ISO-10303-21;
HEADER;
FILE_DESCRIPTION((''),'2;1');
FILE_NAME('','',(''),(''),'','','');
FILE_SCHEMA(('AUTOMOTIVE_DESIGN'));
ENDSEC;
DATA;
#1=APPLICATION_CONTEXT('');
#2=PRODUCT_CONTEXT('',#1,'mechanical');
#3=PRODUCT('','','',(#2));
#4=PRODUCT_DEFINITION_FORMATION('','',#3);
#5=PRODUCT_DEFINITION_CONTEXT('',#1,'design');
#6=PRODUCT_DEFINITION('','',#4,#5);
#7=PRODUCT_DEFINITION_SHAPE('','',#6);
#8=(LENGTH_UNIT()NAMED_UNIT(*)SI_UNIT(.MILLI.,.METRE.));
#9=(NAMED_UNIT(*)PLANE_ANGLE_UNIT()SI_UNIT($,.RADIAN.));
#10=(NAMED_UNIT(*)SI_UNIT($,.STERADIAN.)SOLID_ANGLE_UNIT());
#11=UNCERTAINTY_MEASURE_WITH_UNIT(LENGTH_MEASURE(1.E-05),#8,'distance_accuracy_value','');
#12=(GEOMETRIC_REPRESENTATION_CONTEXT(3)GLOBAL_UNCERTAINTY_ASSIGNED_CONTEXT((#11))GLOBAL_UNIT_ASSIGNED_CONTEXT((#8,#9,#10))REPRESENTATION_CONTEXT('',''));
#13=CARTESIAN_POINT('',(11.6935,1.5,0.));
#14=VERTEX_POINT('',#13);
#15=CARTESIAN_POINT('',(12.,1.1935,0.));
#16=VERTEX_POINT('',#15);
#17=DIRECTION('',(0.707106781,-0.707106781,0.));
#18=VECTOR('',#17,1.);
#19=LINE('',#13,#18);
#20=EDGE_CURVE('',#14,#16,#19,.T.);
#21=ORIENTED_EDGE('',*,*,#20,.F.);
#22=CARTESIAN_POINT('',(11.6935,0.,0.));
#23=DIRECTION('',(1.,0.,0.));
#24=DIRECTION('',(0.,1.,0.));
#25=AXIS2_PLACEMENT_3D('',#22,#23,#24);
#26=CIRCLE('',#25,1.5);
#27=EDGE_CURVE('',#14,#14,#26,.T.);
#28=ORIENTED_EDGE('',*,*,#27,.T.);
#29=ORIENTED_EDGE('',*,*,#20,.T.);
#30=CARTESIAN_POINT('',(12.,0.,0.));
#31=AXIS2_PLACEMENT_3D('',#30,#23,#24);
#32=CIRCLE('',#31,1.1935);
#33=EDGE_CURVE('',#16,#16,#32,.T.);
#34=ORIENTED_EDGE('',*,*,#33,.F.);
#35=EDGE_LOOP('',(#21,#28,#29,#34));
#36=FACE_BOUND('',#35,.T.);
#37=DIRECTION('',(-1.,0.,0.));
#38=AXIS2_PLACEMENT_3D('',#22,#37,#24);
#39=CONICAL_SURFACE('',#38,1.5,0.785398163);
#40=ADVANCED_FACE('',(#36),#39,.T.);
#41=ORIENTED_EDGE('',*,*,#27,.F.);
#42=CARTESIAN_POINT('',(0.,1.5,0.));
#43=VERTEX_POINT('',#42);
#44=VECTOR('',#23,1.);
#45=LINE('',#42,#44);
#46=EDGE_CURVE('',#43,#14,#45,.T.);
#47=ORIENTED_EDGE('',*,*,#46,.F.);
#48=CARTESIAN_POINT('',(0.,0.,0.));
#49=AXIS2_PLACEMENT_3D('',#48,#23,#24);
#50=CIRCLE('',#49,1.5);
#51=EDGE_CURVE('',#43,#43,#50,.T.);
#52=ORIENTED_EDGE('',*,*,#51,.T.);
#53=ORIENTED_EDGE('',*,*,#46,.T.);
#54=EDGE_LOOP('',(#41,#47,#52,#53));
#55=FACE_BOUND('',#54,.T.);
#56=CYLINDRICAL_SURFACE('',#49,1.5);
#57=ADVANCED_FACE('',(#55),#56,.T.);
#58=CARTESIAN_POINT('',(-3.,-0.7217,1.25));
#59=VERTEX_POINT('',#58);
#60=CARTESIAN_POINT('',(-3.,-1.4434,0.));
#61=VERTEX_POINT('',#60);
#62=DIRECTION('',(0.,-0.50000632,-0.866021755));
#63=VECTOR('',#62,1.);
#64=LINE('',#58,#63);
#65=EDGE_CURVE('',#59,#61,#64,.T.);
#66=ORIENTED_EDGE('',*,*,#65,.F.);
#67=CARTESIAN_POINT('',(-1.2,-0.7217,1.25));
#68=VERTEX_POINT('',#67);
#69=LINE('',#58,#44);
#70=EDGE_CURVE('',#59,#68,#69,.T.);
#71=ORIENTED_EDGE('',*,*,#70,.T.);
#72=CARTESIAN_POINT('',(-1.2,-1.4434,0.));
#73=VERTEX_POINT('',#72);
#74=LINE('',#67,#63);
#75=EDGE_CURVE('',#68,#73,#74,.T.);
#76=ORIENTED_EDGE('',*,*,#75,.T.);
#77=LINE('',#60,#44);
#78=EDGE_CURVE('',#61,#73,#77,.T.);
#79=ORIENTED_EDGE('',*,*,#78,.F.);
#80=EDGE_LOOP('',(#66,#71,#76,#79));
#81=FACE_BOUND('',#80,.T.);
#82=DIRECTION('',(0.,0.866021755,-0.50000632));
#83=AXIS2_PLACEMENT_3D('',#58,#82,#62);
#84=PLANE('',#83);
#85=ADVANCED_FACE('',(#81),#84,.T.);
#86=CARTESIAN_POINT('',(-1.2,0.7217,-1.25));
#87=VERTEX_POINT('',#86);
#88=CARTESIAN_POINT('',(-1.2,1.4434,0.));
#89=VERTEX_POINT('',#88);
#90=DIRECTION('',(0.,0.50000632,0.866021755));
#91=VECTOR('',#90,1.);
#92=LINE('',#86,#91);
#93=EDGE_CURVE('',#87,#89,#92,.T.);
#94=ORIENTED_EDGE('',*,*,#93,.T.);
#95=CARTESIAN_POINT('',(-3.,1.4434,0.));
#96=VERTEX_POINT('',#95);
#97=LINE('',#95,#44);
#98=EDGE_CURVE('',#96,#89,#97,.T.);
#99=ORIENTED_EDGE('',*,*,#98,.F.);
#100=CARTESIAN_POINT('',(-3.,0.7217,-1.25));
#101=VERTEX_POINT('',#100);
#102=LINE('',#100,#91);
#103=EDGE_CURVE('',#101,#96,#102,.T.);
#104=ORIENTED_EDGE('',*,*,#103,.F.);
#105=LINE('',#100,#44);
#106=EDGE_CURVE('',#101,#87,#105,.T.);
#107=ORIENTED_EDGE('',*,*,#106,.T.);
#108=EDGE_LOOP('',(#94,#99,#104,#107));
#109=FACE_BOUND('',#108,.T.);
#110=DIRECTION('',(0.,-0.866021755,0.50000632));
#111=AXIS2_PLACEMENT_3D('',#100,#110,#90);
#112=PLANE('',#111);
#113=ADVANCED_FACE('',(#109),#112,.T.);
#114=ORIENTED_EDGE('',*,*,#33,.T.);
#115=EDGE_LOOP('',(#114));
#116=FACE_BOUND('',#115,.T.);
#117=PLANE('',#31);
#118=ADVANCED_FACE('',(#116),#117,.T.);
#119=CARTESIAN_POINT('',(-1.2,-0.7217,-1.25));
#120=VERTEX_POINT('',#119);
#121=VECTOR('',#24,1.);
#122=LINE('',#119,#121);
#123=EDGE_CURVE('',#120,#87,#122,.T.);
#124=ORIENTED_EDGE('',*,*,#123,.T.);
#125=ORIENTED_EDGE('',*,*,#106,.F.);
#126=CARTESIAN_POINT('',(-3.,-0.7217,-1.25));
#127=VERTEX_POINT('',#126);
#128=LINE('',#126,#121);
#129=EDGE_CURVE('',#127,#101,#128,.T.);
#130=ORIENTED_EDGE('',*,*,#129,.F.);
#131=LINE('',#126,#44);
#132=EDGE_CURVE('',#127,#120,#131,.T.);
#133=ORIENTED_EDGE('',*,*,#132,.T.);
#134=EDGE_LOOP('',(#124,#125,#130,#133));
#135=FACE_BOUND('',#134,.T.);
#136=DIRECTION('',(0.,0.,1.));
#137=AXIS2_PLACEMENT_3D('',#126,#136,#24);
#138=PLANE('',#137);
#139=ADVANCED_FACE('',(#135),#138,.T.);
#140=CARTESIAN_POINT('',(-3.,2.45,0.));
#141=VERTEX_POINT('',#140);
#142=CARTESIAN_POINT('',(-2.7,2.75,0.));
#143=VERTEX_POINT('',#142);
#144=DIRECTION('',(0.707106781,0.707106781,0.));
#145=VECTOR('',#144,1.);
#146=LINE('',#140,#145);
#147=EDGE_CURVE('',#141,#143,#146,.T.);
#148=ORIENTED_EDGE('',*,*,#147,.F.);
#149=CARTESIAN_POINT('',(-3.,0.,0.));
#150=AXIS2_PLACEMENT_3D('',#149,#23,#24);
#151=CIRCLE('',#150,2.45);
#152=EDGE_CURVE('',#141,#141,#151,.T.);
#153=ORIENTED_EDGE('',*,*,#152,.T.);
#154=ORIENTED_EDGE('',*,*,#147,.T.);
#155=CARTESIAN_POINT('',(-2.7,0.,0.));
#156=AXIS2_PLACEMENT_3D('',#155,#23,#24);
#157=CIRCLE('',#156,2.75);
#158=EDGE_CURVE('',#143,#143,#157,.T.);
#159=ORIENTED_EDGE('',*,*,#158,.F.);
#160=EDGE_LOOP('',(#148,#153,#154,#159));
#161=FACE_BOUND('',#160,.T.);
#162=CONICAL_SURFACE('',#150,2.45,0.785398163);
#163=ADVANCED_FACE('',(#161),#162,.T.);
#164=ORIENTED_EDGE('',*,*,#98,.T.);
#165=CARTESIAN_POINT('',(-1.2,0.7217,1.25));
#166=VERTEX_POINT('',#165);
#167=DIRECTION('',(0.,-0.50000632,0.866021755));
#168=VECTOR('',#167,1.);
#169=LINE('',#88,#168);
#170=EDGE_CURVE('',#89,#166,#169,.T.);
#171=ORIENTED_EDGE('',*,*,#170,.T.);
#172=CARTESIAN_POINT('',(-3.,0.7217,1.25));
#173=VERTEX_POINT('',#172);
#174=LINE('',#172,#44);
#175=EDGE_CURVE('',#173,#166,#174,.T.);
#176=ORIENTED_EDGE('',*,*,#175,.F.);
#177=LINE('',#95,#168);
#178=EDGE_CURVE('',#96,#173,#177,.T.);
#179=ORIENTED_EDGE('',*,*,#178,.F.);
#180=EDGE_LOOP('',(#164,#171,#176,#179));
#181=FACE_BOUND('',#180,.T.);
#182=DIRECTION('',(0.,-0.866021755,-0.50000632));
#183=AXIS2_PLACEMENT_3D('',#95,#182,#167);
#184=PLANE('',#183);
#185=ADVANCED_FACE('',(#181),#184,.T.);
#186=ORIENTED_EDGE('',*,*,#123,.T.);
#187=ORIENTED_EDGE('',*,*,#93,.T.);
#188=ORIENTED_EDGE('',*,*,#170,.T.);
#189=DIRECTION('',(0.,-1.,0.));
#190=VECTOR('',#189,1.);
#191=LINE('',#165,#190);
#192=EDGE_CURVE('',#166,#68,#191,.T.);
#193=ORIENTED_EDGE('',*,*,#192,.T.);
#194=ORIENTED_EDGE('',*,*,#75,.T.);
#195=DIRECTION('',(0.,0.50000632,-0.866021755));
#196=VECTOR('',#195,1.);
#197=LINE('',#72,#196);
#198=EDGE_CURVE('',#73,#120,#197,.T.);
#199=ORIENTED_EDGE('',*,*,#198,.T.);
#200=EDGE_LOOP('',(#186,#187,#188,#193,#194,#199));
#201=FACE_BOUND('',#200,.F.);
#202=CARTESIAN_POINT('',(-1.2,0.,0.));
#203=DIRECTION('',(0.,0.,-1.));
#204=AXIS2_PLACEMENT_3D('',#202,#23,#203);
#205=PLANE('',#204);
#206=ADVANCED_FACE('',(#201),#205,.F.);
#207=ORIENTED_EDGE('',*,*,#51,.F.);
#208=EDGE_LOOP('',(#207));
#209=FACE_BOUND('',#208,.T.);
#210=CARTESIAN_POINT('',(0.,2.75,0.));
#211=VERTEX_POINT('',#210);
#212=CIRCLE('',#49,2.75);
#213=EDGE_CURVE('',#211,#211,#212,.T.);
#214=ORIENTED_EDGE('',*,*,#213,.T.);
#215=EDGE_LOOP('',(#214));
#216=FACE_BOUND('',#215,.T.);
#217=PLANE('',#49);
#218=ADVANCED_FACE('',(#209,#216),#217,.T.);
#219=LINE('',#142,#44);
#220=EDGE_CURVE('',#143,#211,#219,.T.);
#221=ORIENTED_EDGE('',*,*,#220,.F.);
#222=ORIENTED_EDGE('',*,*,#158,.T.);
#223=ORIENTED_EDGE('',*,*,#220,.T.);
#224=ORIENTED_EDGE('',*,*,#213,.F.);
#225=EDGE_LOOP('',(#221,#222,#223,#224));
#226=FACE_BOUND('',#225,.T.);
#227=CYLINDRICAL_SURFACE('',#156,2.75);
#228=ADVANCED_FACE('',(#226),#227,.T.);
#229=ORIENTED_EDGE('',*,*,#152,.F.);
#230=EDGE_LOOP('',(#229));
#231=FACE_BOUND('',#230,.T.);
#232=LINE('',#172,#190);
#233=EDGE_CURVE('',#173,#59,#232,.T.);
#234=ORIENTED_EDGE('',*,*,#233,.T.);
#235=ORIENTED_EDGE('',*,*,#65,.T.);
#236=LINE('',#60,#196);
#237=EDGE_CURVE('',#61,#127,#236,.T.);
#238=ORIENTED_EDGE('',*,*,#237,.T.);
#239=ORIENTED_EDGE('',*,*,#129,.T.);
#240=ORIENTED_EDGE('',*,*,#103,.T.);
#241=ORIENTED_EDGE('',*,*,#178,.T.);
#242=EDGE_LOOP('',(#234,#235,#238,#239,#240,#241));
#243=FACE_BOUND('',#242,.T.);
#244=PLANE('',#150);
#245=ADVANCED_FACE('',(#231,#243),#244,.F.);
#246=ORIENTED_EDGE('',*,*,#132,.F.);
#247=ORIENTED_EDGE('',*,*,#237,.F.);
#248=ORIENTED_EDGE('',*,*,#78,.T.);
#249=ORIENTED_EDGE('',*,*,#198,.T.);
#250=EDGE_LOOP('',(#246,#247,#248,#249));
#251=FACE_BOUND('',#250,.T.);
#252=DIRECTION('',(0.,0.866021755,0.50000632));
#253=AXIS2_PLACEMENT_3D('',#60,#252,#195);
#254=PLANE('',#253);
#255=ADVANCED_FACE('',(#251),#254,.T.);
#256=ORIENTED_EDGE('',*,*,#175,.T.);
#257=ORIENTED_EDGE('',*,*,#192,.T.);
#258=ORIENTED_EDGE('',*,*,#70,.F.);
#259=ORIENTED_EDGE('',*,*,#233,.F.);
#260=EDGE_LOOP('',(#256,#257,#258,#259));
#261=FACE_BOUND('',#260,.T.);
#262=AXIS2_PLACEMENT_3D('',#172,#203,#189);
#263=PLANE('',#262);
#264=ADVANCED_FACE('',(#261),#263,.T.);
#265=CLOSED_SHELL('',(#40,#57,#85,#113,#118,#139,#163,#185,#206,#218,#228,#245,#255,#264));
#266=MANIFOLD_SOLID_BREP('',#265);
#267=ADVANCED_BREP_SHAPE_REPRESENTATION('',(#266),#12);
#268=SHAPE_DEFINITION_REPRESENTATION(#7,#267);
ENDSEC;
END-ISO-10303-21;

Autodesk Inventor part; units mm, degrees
ref_plane "YZ Plane" through (0, 0, 0) normal (1, 0, 0) x (0, 1, 0)
ref_plane "XZ Plane" through (0, 0, 0) normal (0, 1, 0) x (-1, 0, 0)
ref_plane "XY Plane" through (0, 0, 0) normal (0, 0, 1) x (1, 0, 0)
sketch "Sketch_1" plane through (0, 0, 0) normal (0, 0, 1) x (1, 0, 0)
  line L0 (12, 0) -> (-3, 0)
  line L1 (-3, 0) -> (-3, 2.45)
  line L2 (-3, 2.45) -> (-2.7, 2.75)
  line L3 (-2.7, 2.75) -> (0, 2.75)
  line L4 (0, 2.75) -> (0, 1.5)
  line L5 (0, 1.5) -> (11.6935, 1.5)
  line L6 (11.6935, 1.5) -> (12, 1.1935)
  line L7 (12, 1.1935) -> (12, 0)
  line L8 (12, 0) -> (-3, 0)
revolve "Revolution1" add sketch "Sketch_1" angle 360 about axis through (12, 0, 0) along (1, 0, 0)
thread "Thread1" size "M3x0.5" class "6g" standard "ISO Metric profile" length 11.4691 offset 0.5309
sketch "Sketch_2" plane through (-3, 0, 0) normal (1, 0, 0) x (0, 0, -1)
  line L0 (-1.25, -0.7217) -> (0, -1.4434)
  line L1 (0, -1.4434) -> (1.25, -0.7217)
  line L2 (1.25, -0.7217) -> (1.25, 0.7217)
  line L3 (1.25, 0.7217) -> (0, 1.4434)
  line L4 (0, 1.4434) -> (-1.25, 0.7217)
  line L5 (-1.25, 0.7217) -> (-1.25, -0.7217)
extrude "Extrusion1" cut sketch "Sketch_2" along normal blind 1.8
properties part number "SNSX-M3-12-88"
